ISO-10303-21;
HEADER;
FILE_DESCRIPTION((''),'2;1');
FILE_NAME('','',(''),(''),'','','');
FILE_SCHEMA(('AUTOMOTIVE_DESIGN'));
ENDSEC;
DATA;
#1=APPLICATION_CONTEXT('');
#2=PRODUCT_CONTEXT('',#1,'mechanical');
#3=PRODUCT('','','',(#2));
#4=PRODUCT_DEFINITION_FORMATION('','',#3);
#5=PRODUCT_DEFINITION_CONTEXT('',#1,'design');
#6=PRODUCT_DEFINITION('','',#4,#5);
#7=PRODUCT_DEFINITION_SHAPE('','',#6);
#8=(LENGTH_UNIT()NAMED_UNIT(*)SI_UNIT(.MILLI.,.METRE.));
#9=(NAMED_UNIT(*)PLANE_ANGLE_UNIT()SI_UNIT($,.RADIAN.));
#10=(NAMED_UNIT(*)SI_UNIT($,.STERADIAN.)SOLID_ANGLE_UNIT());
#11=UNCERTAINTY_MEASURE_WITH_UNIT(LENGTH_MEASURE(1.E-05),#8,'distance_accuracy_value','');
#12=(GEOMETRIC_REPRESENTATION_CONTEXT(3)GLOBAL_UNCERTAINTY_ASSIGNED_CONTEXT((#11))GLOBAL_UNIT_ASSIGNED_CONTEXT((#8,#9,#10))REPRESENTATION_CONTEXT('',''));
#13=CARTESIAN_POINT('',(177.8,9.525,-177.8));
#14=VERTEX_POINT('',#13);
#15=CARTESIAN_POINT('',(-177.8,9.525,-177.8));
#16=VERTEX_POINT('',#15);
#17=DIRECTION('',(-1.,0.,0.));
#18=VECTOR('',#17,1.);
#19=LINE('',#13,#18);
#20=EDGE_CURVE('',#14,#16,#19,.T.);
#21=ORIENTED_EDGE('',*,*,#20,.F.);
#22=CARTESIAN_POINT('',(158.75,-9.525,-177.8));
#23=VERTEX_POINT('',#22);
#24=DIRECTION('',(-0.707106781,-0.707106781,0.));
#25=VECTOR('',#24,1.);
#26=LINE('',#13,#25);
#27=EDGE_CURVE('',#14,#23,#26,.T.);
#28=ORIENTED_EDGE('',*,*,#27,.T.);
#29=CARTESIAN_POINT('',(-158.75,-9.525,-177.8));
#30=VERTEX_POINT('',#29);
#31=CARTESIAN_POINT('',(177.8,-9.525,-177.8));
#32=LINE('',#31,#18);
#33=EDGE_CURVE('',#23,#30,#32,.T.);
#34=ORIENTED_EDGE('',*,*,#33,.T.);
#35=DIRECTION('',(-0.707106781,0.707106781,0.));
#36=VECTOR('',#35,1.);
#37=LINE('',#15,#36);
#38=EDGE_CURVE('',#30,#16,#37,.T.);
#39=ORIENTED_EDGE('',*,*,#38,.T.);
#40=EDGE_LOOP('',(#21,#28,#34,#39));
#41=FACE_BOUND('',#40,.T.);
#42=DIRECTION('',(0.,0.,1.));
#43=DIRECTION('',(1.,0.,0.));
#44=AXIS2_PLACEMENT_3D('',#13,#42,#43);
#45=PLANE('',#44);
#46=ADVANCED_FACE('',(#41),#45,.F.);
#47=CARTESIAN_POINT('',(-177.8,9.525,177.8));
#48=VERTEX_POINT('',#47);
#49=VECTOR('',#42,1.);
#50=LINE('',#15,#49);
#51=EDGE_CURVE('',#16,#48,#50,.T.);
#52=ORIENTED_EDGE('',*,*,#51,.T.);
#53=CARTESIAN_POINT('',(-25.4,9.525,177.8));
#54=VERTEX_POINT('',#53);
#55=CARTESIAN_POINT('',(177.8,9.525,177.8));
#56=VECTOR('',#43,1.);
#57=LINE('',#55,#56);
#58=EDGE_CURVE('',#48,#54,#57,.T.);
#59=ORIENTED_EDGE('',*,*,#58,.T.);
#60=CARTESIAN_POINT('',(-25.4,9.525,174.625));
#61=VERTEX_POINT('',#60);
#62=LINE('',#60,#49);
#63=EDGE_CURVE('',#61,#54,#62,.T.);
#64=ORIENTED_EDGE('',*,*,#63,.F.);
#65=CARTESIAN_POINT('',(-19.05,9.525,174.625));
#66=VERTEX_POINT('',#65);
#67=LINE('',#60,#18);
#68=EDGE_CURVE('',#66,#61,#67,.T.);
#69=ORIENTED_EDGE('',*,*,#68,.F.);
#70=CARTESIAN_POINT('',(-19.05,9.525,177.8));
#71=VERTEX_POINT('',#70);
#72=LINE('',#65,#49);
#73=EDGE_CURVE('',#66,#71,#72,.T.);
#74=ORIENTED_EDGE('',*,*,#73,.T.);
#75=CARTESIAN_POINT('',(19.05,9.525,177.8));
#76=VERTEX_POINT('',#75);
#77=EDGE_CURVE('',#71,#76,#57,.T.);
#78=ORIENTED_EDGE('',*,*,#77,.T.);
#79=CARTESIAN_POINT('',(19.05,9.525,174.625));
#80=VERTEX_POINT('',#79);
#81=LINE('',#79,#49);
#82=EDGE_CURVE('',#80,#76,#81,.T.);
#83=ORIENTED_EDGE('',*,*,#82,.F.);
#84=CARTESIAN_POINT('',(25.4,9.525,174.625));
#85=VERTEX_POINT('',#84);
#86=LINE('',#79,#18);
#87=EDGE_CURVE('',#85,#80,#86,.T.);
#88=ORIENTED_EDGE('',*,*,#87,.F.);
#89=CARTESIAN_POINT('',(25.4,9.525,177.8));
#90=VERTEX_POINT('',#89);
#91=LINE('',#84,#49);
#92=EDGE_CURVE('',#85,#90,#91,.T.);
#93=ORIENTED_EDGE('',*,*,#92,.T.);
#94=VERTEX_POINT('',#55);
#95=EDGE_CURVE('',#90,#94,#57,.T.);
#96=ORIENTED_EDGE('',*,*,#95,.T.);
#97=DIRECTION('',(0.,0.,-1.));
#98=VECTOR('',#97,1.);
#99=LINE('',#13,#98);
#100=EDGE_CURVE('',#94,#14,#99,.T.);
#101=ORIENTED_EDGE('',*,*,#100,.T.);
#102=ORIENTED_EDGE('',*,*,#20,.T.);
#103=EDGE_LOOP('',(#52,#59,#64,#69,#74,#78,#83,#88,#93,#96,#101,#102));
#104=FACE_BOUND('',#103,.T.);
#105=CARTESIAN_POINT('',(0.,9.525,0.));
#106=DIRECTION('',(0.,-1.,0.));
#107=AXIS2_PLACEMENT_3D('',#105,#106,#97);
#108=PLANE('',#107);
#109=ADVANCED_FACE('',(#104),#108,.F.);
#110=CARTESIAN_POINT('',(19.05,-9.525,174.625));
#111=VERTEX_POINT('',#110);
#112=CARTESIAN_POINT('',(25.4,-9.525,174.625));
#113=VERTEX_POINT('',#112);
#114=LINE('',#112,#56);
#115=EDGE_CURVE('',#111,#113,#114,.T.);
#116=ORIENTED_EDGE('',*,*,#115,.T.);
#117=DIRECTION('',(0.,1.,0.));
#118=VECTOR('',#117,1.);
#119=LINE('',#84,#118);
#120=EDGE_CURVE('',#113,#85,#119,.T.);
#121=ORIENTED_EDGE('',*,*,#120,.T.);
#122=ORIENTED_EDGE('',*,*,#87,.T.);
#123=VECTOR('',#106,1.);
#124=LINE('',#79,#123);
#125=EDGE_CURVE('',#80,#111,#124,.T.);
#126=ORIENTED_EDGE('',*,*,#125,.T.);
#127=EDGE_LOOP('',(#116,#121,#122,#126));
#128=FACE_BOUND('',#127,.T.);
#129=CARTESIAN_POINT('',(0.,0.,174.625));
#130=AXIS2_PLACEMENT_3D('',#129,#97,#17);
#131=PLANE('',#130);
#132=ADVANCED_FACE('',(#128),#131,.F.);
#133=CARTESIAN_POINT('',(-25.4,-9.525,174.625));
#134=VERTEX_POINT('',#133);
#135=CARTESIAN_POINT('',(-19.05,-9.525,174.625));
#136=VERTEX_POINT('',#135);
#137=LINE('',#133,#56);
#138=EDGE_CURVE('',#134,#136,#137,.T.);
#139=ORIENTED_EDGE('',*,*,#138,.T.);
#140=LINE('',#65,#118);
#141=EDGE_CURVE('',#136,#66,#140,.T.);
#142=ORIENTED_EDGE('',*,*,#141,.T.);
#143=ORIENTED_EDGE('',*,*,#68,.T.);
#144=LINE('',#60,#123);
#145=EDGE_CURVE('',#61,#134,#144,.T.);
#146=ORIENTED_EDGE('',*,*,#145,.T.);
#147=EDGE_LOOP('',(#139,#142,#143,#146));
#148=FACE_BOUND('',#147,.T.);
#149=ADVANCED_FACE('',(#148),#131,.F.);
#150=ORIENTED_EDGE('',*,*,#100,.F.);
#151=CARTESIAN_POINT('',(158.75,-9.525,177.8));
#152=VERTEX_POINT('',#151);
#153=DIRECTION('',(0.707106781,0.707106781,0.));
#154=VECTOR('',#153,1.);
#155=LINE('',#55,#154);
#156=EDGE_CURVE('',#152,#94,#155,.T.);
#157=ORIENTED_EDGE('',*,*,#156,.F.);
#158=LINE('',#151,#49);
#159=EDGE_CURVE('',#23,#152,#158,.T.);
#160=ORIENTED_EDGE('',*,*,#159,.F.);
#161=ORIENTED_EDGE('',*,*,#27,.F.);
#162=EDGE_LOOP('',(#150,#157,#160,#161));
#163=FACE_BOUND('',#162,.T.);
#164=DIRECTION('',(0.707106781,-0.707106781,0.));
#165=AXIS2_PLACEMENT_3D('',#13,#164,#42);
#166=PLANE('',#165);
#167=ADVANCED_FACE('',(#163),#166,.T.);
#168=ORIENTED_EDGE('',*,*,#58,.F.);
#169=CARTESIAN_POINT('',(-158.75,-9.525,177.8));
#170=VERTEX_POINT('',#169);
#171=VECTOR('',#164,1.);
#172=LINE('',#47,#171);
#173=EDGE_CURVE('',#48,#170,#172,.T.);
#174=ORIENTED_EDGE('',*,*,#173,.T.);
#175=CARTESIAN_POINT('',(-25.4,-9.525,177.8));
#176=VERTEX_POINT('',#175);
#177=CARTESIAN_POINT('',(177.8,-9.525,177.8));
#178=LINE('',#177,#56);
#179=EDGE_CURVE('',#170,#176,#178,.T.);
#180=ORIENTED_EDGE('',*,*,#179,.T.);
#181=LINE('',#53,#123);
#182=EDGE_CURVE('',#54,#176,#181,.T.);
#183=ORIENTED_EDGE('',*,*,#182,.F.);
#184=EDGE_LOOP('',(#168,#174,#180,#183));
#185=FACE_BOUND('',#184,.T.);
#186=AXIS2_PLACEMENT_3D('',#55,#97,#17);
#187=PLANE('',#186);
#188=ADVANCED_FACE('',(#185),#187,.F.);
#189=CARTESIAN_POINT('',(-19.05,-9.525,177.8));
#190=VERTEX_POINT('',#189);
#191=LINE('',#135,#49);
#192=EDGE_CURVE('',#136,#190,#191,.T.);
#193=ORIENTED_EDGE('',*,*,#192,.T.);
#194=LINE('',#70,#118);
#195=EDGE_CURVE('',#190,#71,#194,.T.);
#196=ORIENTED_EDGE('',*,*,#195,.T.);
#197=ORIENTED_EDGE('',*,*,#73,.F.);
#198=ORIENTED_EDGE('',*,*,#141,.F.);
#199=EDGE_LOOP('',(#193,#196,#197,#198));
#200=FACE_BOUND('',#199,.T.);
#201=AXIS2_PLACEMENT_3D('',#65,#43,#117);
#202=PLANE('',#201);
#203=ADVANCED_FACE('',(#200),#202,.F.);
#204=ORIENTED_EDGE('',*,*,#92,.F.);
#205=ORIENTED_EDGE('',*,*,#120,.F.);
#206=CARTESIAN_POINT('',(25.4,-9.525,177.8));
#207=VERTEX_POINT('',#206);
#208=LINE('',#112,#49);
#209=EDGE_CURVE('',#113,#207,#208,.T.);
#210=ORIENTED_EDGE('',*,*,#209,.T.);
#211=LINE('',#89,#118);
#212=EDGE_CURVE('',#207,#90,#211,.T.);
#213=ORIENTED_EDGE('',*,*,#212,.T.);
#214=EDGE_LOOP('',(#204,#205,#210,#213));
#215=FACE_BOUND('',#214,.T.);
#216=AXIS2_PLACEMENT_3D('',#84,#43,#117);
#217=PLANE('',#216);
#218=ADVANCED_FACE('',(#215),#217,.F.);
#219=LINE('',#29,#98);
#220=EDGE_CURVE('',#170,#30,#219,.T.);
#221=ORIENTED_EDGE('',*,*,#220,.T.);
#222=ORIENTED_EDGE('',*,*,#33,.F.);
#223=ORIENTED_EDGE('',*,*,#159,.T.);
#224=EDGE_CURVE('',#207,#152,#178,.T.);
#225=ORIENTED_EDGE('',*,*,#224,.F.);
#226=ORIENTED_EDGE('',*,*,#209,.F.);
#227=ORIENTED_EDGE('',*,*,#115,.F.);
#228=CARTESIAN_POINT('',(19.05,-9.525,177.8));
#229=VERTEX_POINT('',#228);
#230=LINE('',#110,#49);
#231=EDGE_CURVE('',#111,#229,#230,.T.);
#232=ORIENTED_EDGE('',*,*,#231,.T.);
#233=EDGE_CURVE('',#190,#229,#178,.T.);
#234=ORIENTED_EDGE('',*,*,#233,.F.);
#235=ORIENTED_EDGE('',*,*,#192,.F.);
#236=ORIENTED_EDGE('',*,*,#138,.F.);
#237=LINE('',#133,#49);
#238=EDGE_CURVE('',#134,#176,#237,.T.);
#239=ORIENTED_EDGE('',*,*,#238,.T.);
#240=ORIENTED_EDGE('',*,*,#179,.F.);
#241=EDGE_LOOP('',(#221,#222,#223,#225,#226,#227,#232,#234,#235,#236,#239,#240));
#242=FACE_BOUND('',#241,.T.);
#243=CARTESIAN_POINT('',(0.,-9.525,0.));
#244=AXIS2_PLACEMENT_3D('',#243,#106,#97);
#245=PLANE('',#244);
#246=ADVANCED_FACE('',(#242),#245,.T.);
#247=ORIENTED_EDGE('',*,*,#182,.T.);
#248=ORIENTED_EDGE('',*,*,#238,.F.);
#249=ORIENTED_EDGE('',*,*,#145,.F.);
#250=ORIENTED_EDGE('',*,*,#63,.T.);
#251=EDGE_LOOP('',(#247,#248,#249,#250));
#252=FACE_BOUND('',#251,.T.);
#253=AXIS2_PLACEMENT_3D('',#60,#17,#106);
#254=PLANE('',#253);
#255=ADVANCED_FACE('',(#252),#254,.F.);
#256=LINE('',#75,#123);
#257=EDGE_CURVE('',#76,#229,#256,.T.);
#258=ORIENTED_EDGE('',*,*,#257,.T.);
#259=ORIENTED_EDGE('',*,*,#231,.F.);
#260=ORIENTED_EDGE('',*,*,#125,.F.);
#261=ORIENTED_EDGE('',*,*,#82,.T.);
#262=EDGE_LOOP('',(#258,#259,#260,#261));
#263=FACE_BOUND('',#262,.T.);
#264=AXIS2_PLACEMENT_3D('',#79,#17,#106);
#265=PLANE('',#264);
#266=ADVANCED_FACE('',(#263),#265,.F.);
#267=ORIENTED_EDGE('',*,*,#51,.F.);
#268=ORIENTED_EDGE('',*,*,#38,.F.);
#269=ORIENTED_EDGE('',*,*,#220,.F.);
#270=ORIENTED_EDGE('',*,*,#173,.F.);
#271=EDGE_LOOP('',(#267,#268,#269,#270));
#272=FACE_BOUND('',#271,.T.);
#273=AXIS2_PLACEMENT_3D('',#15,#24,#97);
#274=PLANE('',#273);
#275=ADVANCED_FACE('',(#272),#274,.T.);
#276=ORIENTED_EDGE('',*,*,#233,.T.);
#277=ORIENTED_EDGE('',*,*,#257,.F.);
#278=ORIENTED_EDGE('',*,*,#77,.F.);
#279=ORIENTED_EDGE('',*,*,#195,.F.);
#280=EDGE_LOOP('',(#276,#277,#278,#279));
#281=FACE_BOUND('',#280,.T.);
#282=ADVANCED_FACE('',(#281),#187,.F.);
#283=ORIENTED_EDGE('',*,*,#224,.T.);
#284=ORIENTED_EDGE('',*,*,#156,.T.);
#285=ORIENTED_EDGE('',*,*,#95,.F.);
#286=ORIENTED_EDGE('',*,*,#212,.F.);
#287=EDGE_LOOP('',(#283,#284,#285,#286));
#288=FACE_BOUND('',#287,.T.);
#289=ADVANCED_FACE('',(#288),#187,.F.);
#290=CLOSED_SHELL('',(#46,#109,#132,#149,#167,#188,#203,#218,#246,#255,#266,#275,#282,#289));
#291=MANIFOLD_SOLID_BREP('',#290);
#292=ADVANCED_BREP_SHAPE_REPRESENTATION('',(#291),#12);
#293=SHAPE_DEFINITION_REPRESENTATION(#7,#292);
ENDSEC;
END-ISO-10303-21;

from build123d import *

# Parameters (mm, degrees)
SKETCH1_W           = 355.6
SKETCH1_H           = 355.6
BOSS_EXTRUDE1_DEPTH = 9.525
CHAMFER1_SIZE       = 19.05
SKETCH2_W           = 6.35
SKETCH2_H           = 19.05
CUT_EXTRUDE1_DEPTH  = 3.175


with BuildPart() as part:
    # Sketch1 → Boss-Extrude1 (new, symmetric)
    with BuildSketch(Plane(origin=(0, 0, 0), x_dir=(1, 0, 0), z_dir=(0, 1, 0))):
        Rectangle(SKETCH1_W, SKETCH1_H)
    extrude(amount=BOSS_EXTRUDE1_DEPTH, both=True)

    # Chamfer1
    chamfer1_edges = [part.edges().sort_by_distance(p)[0] for p in [
        (177.8, -9.525, 0),
        (-177.8, -9.525, 0),
    ]]
    chamfer(chamfer1_edges, length=CHAMFER1_SIZE - 0.0001)  # a hair under: the kernel refuses the full size

    # Sketch2 → Cut-Extrude1 (cut)
    with BuildSketch(Plane.XY.offset(177.8)):
        with Locations((22.225, 0)):
            Rectangle(SKETCH2_W, SKETCH2_H)
        with Locations((-22.225, 0)):
            Rectangle(SKETCH2_W, SKETCH2_H)
    extrude(amount=-CUT_EXTRUDE1_DEPTH, mode=Mode.SUBTRACT)


solid = part.part
